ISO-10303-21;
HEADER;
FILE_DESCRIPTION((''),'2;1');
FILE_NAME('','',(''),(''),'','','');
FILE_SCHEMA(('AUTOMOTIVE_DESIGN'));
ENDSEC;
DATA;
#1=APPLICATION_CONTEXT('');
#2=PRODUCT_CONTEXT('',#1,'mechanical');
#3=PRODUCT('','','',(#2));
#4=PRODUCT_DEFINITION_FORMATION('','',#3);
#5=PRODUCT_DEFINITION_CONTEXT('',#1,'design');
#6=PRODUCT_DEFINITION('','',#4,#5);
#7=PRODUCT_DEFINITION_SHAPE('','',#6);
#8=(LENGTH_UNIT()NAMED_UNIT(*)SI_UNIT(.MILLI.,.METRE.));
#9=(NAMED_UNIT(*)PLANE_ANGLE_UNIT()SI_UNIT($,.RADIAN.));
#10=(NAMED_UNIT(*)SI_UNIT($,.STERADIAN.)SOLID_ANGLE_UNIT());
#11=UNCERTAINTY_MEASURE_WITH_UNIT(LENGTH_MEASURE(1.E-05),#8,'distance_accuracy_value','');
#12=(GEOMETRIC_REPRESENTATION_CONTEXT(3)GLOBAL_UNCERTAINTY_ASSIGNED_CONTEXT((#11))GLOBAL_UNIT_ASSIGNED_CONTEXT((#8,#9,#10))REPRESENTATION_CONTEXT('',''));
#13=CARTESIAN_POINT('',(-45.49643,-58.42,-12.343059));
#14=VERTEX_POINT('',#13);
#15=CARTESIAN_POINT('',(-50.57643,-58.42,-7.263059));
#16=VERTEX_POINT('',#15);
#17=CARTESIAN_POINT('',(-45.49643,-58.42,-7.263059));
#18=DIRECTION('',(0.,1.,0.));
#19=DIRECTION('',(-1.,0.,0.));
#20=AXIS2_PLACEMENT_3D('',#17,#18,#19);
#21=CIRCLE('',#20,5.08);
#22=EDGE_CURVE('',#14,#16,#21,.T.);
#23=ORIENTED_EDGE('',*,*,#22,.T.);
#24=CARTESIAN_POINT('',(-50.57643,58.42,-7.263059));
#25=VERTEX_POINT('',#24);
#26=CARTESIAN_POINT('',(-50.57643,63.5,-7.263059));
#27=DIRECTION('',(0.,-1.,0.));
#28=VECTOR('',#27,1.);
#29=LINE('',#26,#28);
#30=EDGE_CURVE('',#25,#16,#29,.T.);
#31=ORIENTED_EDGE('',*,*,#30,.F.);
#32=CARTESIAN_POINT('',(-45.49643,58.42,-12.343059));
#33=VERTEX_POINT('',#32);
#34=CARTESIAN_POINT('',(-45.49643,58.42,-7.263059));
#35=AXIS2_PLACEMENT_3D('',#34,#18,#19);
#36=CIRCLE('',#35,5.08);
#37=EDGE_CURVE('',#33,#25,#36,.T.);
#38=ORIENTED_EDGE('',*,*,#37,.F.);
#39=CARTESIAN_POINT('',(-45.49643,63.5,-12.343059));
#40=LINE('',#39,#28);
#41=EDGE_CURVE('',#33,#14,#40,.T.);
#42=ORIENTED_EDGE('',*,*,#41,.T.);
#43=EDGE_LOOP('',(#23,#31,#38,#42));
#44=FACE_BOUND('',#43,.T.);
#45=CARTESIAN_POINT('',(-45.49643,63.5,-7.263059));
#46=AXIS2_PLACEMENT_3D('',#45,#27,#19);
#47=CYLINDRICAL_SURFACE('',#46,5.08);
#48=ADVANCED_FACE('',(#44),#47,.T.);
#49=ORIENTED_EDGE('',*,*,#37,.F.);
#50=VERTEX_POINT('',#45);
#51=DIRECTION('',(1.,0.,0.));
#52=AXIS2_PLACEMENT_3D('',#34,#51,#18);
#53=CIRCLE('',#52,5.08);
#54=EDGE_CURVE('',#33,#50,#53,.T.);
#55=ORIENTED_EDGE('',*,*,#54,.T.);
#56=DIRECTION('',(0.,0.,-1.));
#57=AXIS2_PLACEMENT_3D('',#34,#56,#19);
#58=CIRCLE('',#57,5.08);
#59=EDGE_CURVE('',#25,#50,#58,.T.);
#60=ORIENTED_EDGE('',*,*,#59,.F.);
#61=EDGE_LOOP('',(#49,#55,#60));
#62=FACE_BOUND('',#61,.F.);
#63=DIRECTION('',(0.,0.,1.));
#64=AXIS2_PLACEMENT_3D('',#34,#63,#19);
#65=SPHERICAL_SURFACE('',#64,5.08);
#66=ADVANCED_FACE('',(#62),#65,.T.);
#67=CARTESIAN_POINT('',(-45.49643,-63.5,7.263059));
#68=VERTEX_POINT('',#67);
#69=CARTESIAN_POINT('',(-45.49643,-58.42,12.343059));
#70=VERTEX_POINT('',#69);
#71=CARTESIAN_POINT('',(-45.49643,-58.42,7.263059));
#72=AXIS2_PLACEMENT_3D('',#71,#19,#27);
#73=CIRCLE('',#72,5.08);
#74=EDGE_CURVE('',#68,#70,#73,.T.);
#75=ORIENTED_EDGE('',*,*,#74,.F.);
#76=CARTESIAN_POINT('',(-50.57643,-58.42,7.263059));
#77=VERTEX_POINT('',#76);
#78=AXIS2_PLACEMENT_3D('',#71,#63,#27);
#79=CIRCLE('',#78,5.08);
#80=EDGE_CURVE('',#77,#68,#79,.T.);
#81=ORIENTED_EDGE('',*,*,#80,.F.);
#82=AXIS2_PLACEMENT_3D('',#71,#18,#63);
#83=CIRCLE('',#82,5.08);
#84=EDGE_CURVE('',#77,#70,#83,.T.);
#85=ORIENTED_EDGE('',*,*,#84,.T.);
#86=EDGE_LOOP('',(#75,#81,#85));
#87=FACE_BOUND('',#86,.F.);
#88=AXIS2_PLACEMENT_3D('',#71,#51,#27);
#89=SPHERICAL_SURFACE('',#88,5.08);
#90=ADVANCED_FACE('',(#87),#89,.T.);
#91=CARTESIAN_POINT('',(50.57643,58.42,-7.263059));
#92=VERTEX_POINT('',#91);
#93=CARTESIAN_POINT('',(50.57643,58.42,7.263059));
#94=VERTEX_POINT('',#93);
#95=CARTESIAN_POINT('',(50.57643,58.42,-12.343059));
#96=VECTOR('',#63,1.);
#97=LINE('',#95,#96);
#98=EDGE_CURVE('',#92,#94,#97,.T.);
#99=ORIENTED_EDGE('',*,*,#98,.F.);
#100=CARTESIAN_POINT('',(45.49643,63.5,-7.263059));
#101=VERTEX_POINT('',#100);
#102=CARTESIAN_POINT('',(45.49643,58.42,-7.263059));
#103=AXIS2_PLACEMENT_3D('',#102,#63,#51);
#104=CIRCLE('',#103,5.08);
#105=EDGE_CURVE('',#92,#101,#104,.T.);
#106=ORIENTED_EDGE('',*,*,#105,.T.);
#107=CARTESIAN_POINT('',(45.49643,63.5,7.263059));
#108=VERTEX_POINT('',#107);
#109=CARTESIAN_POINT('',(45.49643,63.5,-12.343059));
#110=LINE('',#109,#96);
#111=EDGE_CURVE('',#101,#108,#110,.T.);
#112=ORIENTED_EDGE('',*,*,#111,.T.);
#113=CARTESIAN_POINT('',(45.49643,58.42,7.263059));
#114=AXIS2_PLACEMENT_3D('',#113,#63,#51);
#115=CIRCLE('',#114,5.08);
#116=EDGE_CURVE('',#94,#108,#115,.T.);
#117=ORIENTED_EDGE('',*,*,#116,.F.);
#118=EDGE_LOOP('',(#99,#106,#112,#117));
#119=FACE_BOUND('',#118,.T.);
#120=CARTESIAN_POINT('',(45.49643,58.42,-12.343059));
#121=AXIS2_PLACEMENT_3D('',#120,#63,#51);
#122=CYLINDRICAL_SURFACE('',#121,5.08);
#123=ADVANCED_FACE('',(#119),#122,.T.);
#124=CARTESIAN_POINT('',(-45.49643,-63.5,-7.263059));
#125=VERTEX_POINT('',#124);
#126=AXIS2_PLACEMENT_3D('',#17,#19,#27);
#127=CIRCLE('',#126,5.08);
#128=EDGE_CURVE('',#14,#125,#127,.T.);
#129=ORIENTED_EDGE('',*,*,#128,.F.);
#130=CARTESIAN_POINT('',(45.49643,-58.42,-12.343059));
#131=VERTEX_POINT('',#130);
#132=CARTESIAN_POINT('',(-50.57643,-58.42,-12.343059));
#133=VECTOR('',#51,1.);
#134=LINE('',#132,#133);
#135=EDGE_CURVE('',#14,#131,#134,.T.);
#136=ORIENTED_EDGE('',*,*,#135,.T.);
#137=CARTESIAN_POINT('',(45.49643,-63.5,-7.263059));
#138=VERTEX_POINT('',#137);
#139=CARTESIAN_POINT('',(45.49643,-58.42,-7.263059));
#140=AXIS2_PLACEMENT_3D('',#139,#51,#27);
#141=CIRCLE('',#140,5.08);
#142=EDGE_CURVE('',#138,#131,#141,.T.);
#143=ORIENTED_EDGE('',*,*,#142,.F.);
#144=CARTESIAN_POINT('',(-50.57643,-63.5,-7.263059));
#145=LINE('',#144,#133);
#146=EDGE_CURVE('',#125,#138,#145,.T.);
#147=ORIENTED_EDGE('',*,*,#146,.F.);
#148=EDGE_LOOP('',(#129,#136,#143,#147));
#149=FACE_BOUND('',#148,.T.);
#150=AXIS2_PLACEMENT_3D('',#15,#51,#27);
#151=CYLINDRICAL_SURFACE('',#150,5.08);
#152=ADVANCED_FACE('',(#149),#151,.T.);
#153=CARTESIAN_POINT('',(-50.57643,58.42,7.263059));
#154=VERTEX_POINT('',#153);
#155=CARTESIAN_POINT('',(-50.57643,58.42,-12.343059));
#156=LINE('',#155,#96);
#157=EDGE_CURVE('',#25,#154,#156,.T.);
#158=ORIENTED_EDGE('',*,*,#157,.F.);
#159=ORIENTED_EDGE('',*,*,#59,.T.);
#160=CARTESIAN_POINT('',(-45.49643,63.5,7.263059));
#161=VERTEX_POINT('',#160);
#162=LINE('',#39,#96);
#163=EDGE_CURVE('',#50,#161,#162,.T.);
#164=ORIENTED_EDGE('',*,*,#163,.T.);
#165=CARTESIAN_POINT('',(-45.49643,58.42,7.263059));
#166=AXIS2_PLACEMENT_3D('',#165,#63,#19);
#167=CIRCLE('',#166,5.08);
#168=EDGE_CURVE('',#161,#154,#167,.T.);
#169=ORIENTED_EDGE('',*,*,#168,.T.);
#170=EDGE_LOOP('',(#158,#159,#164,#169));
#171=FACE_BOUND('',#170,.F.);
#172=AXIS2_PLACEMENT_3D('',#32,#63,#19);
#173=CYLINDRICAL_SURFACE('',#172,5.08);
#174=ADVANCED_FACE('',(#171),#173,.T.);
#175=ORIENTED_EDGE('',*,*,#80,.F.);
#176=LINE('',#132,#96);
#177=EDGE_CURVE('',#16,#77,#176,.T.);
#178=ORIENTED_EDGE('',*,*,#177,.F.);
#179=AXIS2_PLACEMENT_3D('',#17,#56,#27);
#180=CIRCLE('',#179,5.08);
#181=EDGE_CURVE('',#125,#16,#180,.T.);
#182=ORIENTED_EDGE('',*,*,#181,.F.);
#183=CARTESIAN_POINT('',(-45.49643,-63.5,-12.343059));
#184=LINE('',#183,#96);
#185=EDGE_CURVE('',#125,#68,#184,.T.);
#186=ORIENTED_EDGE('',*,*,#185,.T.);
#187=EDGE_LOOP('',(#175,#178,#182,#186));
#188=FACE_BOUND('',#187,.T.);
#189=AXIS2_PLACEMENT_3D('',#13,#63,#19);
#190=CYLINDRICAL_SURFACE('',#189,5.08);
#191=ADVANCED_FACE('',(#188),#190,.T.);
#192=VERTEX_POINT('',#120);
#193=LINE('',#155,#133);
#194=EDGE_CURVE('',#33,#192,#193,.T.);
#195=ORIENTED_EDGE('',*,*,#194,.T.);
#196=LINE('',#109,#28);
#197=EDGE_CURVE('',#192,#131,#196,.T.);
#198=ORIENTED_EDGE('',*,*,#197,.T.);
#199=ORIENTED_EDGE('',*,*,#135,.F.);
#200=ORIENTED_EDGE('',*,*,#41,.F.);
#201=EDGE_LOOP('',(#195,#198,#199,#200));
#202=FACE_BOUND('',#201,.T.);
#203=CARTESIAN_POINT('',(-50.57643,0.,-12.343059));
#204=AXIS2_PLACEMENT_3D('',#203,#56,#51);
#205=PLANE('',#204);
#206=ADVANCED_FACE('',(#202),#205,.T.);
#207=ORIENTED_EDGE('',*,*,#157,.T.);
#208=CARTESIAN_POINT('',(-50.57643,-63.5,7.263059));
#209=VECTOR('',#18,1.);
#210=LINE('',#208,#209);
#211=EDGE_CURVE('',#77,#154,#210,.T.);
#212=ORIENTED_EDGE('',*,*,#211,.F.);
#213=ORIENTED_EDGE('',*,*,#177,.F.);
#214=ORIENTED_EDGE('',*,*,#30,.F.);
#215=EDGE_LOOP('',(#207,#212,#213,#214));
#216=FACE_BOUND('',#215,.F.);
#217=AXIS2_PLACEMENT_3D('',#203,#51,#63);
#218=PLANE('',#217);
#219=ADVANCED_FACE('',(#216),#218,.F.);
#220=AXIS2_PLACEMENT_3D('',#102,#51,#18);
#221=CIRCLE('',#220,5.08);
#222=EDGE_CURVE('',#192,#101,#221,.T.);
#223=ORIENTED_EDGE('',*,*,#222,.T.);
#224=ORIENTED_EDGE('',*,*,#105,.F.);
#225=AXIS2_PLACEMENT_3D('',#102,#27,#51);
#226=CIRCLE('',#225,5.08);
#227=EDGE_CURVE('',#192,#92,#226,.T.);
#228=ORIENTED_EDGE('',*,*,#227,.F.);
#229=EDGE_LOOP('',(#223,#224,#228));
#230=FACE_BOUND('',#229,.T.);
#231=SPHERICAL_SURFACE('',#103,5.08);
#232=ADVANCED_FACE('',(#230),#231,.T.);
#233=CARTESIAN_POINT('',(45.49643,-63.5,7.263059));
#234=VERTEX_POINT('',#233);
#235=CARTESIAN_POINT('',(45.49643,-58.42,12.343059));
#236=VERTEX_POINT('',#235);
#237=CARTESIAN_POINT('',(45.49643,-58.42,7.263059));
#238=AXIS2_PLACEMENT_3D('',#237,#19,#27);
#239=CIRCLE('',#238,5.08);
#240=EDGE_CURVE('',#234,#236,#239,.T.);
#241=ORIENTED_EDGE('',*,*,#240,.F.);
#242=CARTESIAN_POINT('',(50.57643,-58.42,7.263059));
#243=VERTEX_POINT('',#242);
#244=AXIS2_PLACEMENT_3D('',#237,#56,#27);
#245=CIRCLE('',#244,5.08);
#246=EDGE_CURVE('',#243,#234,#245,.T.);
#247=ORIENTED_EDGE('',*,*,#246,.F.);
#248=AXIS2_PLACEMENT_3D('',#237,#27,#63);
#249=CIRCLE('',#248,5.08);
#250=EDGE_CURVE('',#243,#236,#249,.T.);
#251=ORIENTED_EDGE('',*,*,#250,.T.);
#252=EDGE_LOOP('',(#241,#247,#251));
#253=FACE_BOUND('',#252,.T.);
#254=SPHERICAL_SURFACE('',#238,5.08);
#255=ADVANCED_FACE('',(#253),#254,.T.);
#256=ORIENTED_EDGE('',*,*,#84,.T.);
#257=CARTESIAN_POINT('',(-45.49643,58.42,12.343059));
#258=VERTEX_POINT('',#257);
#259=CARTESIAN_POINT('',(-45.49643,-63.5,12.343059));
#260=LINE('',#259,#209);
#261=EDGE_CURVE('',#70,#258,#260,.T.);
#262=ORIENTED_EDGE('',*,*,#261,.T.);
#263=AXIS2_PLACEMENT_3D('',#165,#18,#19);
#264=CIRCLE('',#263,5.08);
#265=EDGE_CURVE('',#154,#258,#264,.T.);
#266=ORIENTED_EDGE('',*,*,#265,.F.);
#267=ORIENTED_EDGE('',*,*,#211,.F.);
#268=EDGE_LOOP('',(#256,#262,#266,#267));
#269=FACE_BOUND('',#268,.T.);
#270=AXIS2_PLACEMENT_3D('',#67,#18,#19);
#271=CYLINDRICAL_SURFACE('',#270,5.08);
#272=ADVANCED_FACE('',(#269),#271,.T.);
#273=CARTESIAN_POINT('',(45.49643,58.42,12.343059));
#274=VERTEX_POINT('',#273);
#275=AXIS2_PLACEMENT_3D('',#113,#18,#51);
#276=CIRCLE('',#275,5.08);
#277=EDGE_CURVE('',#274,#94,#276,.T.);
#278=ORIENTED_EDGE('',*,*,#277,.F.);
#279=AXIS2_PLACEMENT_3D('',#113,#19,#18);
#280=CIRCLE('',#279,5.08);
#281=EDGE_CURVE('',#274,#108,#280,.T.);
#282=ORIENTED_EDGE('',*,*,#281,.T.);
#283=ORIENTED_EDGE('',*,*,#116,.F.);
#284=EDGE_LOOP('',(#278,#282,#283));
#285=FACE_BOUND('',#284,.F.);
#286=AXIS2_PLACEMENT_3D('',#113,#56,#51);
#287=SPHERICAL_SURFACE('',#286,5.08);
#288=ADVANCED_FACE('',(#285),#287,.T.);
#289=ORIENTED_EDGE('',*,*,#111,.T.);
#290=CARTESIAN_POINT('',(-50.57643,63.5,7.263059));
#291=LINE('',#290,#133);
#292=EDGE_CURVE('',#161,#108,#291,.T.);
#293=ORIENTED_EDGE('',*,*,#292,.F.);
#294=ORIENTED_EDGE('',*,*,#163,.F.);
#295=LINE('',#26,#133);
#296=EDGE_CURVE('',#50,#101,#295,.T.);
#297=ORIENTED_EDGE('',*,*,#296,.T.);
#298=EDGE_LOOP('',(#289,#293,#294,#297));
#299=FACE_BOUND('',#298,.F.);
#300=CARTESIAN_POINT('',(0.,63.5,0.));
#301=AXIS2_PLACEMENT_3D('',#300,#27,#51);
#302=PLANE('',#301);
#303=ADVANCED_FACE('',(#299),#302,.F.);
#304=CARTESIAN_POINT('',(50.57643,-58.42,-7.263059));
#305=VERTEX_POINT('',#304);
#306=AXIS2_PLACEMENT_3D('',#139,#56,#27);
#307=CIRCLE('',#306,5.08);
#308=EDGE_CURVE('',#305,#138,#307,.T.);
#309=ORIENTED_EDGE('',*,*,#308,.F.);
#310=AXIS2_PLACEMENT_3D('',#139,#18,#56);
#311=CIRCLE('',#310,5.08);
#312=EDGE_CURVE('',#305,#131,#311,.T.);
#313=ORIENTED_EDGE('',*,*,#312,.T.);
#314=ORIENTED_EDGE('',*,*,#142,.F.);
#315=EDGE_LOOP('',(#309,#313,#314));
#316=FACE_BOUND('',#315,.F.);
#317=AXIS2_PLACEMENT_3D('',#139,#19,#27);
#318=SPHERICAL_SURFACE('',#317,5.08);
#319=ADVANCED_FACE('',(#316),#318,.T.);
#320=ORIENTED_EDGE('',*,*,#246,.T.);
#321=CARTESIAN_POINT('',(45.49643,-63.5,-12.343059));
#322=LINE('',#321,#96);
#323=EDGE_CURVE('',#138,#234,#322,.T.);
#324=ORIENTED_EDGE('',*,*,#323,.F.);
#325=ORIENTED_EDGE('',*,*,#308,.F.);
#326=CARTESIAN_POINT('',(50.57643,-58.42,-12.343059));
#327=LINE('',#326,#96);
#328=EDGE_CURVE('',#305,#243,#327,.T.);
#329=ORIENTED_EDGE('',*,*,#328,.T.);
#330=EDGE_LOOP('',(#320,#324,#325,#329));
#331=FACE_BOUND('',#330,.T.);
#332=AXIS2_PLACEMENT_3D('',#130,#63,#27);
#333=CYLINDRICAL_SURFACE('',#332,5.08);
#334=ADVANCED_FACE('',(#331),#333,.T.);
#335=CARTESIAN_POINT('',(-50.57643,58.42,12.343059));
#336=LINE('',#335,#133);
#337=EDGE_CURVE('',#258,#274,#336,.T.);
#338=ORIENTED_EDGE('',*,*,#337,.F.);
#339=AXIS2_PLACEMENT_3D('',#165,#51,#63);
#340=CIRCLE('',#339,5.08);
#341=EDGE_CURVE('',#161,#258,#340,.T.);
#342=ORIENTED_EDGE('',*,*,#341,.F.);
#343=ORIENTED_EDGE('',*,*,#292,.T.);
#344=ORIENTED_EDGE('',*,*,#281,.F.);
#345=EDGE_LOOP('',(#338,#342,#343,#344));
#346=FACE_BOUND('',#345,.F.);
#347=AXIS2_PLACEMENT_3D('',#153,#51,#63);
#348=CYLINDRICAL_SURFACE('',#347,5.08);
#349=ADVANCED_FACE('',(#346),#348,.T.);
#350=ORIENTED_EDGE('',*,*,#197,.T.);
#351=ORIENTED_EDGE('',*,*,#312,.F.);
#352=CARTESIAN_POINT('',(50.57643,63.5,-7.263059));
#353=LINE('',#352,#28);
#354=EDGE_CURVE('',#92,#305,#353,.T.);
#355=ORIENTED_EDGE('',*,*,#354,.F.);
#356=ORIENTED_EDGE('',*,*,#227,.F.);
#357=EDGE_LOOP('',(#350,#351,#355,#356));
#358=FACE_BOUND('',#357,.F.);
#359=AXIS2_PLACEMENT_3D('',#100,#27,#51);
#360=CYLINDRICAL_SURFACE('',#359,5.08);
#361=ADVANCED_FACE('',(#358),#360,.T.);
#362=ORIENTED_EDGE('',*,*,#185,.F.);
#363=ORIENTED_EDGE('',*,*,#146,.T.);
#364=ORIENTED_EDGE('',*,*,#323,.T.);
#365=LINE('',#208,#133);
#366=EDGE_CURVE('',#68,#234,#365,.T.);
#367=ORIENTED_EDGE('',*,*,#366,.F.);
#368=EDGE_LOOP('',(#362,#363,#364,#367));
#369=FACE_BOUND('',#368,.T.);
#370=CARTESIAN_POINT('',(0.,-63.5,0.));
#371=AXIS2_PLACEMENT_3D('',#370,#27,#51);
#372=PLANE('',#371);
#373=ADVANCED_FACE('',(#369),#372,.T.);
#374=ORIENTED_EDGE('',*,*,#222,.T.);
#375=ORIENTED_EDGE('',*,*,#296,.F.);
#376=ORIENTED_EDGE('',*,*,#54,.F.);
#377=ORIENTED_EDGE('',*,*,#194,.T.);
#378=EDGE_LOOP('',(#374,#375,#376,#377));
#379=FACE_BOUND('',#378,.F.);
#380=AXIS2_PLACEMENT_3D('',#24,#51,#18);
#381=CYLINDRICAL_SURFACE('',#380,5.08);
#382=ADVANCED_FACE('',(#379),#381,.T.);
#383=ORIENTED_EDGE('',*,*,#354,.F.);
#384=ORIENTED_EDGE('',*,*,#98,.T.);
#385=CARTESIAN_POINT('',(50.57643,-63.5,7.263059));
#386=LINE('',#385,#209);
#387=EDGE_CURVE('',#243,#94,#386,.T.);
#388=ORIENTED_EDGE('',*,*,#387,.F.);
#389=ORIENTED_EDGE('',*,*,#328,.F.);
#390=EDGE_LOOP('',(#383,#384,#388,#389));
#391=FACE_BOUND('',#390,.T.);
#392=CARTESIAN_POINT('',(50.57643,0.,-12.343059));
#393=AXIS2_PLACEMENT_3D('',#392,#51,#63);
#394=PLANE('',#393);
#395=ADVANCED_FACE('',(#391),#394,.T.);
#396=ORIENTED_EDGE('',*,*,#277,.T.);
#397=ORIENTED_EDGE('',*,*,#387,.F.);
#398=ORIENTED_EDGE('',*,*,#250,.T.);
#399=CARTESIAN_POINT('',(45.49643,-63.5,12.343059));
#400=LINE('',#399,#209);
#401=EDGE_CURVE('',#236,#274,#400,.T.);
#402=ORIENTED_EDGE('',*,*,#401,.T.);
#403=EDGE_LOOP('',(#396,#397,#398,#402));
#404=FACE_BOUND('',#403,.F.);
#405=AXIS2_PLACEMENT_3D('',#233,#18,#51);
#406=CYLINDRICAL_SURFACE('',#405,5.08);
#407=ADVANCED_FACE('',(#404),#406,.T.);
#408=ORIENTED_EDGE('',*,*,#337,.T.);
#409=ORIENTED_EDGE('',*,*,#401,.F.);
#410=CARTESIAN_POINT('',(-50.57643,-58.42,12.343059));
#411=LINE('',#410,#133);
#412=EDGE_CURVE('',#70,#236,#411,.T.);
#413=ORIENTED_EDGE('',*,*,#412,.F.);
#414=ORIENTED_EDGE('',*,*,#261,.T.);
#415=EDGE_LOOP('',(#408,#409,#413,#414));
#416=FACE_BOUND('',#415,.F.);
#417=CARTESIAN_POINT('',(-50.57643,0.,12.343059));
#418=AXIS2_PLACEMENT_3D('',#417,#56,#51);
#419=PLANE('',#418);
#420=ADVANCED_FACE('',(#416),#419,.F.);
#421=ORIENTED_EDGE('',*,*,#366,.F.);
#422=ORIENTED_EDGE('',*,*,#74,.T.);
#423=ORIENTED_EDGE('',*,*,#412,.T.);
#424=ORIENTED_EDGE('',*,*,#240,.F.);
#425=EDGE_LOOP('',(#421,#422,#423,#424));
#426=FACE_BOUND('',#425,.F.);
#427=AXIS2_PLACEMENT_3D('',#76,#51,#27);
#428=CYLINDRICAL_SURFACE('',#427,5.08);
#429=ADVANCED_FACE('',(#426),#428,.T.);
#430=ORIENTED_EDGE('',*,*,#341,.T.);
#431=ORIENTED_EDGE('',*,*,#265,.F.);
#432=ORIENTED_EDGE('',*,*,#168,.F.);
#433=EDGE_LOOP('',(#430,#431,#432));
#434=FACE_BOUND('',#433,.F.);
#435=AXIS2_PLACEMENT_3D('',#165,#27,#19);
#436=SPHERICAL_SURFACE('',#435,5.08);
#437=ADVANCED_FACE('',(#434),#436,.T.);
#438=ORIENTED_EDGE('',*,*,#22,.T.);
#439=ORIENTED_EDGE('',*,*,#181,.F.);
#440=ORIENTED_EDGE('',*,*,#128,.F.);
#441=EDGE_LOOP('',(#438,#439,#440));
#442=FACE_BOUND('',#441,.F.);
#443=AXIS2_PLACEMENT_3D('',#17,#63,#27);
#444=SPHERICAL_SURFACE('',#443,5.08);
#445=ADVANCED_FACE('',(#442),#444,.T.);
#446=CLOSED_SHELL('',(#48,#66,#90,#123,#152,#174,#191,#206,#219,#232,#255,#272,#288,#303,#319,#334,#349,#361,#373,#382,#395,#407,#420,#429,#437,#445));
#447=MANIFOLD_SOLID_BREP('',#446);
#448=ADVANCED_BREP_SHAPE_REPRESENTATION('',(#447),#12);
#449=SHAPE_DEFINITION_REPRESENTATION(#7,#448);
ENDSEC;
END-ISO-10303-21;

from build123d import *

# Parameters (mm, degrees)
F0_W     = 101.1528596282
F0_H     = 24.6861185879
F1_DEPTH = 63.5
F2_R     = 5.08


# Not quite as in the source:
# - a feature names something its author has since deleted; it is built from what else it names


with BuildPart() as f1:
    # F0 (on Front) → F1 (new body, symmetric)
    with BuildSketch(Plane.XZ):
        Rectangle(F0_W, F0_H)
    extrude(amount=F1_DEPTH, both=True)

    # F2
    f2_edges = [f1.edges().sort_by_distance(p)[0] for p in [
        (0, -63.5, 12.343059),
        (-50.57643, -63.5, 0),
        (0, -63.5, -12.343059),
        (50.57643, -63.5, 0),
        (50.57643, 63.5, 0),
        (50.57643, 0, 12.343059),
        (50.57643, 0, -12.343059),
        (-50.57643, 0, 12.343059),
        (-50.57643, 63.5, 0),
        (-50.57643, 0, -12.343059),
        (0, 63.5, 12.343059),
        (0, 63.5, -12.343059),
    ]]
    fillet(f2_edges, radius=F2_R)


solid = f1.part
